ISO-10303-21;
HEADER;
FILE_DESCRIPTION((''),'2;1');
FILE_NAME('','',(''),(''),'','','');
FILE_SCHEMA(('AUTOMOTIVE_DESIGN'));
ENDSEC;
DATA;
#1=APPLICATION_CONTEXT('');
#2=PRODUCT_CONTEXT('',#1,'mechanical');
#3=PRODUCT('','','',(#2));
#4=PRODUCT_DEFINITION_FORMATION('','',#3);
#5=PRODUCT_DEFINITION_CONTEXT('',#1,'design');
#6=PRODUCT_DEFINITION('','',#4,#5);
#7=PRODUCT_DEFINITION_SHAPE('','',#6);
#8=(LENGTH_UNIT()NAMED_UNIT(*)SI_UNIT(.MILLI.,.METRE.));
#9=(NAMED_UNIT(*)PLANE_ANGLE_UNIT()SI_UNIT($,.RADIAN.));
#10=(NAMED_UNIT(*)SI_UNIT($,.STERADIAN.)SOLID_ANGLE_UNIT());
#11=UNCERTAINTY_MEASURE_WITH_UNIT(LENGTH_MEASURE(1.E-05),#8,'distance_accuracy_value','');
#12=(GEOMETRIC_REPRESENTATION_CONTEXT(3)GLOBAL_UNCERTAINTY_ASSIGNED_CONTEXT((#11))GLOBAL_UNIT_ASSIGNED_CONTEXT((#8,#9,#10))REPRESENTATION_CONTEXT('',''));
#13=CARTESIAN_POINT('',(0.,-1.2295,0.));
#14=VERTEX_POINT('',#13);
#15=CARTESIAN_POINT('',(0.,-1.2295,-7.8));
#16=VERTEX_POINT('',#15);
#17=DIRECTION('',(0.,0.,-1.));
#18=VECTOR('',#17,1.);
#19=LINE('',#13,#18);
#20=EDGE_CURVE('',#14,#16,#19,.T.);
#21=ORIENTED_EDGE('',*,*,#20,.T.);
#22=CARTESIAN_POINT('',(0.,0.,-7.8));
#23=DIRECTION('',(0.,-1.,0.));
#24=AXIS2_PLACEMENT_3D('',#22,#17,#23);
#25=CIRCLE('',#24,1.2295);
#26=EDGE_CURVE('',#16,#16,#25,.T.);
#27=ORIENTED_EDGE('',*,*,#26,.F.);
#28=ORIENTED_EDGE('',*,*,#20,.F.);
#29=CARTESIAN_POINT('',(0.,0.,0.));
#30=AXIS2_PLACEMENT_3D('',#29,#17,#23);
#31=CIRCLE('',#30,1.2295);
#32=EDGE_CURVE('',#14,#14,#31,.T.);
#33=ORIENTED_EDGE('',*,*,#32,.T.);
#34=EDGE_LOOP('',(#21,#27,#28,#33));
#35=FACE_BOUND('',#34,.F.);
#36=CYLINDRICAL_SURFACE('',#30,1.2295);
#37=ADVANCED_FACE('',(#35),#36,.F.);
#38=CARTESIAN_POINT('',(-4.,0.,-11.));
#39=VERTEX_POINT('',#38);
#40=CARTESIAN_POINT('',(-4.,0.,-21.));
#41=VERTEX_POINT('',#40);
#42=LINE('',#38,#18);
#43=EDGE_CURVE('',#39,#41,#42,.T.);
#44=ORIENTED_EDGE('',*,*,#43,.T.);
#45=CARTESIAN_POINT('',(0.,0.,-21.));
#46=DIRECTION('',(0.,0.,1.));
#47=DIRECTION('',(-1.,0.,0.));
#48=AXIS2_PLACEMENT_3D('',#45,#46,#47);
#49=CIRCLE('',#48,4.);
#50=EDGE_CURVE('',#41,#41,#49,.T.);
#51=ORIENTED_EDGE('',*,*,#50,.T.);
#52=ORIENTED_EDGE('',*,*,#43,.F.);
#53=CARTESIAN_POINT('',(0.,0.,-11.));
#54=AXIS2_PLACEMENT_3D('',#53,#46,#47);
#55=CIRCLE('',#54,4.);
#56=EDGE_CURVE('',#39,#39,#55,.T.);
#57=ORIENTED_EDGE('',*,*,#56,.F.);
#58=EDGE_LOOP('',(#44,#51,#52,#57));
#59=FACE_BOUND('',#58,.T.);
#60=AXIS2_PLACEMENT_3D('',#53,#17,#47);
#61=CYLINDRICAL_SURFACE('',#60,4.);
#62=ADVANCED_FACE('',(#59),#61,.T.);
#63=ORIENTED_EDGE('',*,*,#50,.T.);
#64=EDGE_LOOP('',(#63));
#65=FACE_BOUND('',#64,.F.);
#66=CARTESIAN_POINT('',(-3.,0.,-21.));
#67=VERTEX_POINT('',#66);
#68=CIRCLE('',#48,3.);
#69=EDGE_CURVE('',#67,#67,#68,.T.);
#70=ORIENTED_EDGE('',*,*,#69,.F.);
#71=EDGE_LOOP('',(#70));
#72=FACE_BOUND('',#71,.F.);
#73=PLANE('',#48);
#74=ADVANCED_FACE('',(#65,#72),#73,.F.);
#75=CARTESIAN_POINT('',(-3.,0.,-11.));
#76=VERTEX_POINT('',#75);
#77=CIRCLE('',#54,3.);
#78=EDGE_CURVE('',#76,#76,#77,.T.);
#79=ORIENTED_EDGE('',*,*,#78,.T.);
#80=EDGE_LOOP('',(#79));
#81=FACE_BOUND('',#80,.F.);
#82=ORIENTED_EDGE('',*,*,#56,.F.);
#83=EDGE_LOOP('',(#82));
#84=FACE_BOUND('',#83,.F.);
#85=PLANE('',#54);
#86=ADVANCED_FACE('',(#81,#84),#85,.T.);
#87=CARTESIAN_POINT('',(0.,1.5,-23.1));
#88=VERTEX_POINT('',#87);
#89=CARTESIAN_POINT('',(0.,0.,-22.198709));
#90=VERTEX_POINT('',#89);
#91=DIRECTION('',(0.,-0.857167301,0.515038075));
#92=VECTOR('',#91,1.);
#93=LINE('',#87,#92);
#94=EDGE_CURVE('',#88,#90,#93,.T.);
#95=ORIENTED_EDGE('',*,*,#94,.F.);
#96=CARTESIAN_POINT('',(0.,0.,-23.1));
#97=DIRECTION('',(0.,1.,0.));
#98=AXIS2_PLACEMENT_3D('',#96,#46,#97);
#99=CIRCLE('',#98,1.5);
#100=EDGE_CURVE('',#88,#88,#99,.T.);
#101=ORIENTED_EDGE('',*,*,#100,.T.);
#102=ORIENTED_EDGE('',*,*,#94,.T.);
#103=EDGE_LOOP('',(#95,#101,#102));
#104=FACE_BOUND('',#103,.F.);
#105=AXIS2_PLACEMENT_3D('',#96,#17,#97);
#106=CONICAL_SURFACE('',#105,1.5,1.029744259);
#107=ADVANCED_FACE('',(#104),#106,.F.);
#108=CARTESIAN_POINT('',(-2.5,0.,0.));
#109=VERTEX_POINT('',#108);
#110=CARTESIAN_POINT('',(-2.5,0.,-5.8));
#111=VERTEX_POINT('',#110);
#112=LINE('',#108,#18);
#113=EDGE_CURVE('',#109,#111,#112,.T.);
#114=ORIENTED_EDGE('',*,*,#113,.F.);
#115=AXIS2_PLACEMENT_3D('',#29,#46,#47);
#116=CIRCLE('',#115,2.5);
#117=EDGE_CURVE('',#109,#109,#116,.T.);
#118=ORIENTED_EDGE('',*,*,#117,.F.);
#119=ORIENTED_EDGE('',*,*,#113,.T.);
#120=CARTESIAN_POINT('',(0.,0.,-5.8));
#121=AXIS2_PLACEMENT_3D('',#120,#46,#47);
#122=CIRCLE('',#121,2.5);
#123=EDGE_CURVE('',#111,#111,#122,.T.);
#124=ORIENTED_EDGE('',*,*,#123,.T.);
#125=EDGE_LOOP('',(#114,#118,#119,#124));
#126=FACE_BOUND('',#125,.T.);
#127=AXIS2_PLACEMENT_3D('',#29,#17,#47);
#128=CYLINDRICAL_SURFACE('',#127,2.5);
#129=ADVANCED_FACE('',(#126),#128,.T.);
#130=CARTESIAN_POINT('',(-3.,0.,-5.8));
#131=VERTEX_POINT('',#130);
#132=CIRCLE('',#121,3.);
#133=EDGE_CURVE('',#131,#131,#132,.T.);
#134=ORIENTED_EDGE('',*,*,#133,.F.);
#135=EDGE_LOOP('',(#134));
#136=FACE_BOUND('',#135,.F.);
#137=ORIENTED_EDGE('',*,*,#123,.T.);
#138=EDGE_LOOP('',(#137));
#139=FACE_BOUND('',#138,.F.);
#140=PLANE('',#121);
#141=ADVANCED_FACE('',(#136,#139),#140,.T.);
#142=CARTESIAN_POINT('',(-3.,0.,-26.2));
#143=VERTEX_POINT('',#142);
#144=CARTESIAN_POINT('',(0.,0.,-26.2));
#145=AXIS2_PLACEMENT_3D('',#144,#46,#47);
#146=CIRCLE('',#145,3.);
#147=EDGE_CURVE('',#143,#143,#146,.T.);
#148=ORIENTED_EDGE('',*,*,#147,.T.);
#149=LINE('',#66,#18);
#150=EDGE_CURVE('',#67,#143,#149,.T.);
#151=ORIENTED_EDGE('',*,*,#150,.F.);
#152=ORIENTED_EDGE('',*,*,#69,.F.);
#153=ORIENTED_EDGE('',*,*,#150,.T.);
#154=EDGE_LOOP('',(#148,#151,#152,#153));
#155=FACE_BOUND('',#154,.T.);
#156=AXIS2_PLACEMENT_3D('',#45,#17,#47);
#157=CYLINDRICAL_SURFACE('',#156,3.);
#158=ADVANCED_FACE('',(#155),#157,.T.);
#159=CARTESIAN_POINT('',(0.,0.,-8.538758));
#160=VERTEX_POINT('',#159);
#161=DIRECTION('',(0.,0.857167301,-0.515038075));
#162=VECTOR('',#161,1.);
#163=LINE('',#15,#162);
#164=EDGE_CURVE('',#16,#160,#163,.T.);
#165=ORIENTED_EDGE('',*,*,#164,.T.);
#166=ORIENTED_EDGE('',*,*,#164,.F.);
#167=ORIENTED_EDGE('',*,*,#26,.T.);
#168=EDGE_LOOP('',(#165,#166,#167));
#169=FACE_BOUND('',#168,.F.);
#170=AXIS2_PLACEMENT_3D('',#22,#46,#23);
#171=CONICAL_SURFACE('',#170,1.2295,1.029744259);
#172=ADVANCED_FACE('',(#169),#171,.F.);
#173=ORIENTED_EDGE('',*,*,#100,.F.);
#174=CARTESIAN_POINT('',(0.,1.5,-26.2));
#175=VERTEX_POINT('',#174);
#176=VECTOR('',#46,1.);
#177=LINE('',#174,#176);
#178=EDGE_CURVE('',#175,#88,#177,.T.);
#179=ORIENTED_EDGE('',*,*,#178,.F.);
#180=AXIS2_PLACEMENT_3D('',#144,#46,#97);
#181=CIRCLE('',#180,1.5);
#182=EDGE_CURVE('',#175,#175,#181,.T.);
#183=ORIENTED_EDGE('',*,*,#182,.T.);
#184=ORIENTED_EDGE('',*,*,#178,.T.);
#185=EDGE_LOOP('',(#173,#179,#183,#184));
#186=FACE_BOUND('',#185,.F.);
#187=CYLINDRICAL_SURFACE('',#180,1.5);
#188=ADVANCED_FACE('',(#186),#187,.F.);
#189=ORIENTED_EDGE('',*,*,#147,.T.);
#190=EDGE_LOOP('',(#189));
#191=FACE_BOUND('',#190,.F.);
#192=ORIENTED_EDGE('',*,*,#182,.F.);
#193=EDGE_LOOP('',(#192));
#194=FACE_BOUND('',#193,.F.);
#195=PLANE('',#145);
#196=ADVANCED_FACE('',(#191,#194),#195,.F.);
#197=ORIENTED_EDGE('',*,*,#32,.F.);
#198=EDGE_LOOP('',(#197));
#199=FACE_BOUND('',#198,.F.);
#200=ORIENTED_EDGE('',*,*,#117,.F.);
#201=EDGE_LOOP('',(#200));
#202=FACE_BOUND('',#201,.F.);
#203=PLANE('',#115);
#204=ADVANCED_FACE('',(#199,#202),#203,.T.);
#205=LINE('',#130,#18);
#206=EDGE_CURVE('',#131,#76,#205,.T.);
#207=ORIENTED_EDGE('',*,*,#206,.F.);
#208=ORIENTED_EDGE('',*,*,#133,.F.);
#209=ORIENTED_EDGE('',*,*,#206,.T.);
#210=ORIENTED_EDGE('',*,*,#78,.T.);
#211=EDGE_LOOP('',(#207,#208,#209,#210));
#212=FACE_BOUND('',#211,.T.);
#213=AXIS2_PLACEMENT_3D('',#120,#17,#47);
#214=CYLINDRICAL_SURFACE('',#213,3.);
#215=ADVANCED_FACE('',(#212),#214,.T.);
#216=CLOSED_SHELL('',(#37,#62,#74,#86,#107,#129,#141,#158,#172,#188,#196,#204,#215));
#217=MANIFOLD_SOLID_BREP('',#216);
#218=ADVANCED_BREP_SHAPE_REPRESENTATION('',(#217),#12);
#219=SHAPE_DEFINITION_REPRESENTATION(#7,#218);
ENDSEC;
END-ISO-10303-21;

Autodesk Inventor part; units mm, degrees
ref_plane "YZ Plane" through (0, 0, 0) normal (1, 0, 0) x (0, 1, 0)
ref_plane "XZ Plane" through (0, 0, 0) normal (0, 1, 0) x (-1, 0, 0)
ref_plane "XY Plane" through (0, 0, 0) normal (0, 0, 1) x (1, 0, 0)
sketch "Sketch1" plane through (0, 0, 0) normal (0, 1, 0) x (-1, 0, 0)
  line L0 (0, 0) -> (2.5, 0)
  line L1 (2.5, 0) -> (2.5, -26.2)
  line L2 (2.5, -26.2) -> (0, -26.2)
  line L3 (0, -26.2) -> (0, 0)
  line L4 (2.5, -5.8) -> (3, -5.8)
  line L5 (3, -5.8) -> (3, -11)
  line L6 (3, -11) -> (4, -11)
  line L7 (4, -11) -> (4, -21)
  line L8 (4, -21) -> (3, -21)
  line L9 (3, -21) -> (3, -26.2)
  line L10 (3, -26.2) -> (2.5, -26.2)
  dimension "d0" = 5
  dimension "d10" = 6
  dimension "d11" = 5.8
  dimension "d12" = 8
  dimension "d13" = 5.2
  dimension "d14" = 5.2
  dimension "d15" = 10
revolve "Revolution1" add sketch "Sketch1" angle 360 about axis through (0, 0, -26.2) along (0, 0, 1)
sketch "Sketch2" plane through (0, 0, 0) normal (0, 0, 1) x (1, 0, 0)
  point P0 (0, 0)
  point P1 (0, 0)
hole "Hole1" at (0, 0, 0) direction (0, 0, -1) diameter 2.459 depth 7.8 tip angle 118 thread size "M3x0.5" class "6H" standard "ISO Metric profile"
sketch "Sketch3" plane through (0, 0, -26.2) normal (0, 0, -1) x (-1, 0, 0)
  circle A0 centre (0, 0) radius 1.2295 projected
  point P0 (0, 0)
hole "Hole2" at (0, 0, -26.2) direction (0, 0, 1) diameter 3 depth 3.1 tip angle 118
equation "\"d14\" = d13"
properties part number "TorquimeterShaft" material "Stainless Steel, Austenitic"
